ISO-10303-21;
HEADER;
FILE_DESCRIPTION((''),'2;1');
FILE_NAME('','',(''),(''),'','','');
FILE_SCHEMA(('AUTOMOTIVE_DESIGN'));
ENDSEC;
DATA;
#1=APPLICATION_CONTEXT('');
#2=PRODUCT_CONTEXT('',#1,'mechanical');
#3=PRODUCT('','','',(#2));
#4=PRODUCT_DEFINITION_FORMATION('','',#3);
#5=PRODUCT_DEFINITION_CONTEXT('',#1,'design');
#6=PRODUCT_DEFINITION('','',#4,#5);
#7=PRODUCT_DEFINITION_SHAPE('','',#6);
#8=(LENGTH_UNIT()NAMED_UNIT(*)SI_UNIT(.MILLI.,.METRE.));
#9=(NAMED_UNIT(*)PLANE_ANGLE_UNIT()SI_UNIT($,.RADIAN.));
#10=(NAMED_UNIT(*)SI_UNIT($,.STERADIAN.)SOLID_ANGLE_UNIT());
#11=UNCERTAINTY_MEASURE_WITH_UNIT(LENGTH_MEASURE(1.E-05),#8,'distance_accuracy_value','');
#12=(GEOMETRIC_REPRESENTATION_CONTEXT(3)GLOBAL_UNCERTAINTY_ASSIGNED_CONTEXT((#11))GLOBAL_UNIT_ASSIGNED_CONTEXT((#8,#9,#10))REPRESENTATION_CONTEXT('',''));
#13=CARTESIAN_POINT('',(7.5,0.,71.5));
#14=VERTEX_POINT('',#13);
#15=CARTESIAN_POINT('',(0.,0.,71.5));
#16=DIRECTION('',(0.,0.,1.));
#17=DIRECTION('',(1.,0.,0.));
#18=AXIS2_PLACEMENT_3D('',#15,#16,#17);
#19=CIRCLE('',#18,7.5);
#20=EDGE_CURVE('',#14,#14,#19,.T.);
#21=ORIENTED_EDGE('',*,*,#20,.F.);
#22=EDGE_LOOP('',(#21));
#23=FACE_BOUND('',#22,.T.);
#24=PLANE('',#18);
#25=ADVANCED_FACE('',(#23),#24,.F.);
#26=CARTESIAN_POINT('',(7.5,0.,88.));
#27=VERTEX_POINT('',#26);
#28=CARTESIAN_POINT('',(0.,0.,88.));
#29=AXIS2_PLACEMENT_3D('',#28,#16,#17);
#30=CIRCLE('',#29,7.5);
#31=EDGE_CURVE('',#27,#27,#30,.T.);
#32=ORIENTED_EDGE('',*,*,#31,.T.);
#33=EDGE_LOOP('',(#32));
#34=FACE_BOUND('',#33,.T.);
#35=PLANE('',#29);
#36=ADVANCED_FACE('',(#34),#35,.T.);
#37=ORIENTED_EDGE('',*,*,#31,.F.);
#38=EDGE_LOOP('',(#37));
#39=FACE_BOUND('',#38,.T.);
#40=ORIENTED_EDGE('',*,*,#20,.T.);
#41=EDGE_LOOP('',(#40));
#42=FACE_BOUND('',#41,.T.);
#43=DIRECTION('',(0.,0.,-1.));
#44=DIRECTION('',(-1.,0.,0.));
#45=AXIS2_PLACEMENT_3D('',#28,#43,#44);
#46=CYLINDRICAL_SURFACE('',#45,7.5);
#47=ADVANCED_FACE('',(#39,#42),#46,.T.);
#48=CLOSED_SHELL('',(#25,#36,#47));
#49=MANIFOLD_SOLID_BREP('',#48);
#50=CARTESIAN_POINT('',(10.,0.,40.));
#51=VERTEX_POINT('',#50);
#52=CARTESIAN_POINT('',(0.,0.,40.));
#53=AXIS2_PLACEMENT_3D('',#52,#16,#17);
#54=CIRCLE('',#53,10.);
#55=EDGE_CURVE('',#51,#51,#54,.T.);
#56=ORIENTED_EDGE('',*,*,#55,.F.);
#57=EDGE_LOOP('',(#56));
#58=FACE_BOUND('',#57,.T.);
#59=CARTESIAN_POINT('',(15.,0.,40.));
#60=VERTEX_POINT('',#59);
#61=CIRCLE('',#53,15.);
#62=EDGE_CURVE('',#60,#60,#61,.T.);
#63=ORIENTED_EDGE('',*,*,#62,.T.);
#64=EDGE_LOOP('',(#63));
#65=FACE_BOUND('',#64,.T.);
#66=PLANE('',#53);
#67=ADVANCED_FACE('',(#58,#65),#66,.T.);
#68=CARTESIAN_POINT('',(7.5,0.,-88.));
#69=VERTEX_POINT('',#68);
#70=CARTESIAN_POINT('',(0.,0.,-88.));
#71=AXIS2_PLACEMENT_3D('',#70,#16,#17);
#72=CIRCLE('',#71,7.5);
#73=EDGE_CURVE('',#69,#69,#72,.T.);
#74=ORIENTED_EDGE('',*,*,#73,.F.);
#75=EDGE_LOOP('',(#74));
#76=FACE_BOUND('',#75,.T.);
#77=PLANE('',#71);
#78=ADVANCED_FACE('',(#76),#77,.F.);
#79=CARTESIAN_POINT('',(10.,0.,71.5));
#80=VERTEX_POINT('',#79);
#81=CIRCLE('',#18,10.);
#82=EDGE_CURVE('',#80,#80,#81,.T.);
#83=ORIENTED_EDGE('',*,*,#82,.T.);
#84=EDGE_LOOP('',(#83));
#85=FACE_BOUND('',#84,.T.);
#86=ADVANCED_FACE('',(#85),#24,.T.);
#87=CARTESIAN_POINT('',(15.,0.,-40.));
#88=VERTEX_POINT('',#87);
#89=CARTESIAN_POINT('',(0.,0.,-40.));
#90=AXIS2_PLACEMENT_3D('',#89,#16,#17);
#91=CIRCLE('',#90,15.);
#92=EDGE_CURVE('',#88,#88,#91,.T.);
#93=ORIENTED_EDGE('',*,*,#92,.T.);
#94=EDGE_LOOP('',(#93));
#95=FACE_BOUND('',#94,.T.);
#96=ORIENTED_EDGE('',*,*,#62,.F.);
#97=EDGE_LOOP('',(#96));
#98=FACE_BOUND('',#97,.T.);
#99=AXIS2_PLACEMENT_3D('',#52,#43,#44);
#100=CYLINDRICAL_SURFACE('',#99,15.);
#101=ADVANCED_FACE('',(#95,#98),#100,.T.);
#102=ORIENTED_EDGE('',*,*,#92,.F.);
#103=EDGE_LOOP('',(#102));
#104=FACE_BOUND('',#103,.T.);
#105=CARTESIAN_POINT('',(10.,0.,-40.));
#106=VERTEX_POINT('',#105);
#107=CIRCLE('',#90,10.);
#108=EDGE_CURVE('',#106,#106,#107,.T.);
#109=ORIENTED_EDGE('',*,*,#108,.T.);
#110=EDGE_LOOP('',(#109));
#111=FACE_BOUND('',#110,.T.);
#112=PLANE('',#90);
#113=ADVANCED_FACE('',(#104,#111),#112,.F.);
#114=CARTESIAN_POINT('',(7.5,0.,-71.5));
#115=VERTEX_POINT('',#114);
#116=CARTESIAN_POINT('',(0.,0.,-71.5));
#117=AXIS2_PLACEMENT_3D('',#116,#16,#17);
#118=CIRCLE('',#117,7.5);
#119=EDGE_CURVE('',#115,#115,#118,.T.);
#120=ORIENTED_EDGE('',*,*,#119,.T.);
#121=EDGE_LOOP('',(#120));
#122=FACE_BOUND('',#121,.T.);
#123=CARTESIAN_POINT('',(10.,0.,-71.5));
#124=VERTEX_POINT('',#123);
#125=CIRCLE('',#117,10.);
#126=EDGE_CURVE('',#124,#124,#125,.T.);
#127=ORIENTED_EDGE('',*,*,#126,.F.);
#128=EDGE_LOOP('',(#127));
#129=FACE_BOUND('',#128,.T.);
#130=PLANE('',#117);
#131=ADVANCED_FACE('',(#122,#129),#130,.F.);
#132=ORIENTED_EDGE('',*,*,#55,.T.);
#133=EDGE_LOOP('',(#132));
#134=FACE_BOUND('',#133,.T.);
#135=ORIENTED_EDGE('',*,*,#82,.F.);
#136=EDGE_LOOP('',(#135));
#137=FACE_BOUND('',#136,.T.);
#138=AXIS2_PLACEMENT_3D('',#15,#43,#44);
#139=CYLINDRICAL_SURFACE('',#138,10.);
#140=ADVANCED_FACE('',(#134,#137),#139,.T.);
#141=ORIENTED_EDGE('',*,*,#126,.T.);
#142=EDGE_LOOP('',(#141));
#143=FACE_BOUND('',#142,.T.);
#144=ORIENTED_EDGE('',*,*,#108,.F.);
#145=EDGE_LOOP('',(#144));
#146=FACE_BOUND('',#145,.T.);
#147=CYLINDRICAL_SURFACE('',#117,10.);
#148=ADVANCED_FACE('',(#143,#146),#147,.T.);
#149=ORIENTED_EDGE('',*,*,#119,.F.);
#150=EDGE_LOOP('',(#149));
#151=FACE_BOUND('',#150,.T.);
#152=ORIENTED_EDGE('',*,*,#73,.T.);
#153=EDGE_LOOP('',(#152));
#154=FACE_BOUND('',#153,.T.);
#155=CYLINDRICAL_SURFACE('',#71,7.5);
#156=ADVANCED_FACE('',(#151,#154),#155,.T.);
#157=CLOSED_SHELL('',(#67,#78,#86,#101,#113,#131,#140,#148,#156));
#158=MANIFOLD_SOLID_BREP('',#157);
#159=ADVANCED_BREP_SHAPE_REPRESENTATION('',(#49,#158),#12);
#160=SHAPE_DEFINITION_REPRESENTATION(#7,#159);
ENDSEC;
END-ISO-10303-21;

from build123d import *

# Parameters (mm, degrees)
ESQUISSE1_R        = 15
BOSS_EXTRU_1_DEPTH = 40
BOSS_EXTRU_5_START = 40
ESQUISSE1_10_R     = 10
BOSS_EXTRU_5_DEPTH = 31.5
BOSS_EXTRU_3_START = 71.5
ESQUISSE1_7_R      = 7.5
BOSS_EXTRU_3_DEPTH = 16.5
BOSS_EXTRU_4_START = -71.5
ESQUISSE1_8_R      = 7.5
BOSS_EXTRU_4_DEPTH = 16.5
BOSS_EXTRU_6_START = -71.5
ESQUISSE1_11_R     = 10
BOSS_EXTRU_6_DEPTH = 31.5


with BuildPart() as part:
    # Esquisse1 → Boss.-Extru.1 (new, symmetric)
    with BuildSketch(Plane.XY):
        Circle(ESQUISSE1_R)
    extrude(amount=BOSS_EXTRU_1_DEPTH, both=True)

    # Esquisse1<10> → Boss.-Extru.5 (add)
    with BuildSketch(Plane.XY.offset(BOSS_EXTRU_5_START)):
        Circle(ESQUISSE1_10_R)
    extrude(amount=BOSS_EXTRU_5_DEPTH)



with BuildPart() as body_2:
    # Esquisse1<7> → Boss.-Extru.3 (new body)
    with BuildSketch(Plane.XY.offset(BOSS_EXTRU_3_START)):
        Circle(ESQUISSE1_7_R)
    extrude(amount=BOSS_EXTRU_3_DEPTH)


with BuildPart() as body_3:
    # Esquisse1<8> → Boss.-Extru.4 (new body)
    with BuildSketch(Plane.XY.offset(BOSS_EXTRU_4_START)):
        Circle(ESQUISSE1_8_R)
    extrude(amount=-BOSS_EXTRU_4_DEPTH)


with BuildPart() as part_1:
    add(part.part)

    add(body_3.part)  # Boss.-Extru.6 merges body 3
    # Esquisse1<11> → Boss.-Extru.6 (add)
    with BuildSketch(Plane.XY.offset(BOSS_EXTRU_6_START)):
        Circle(ESQUISSE1_11_R)
    extrude(amount=BOSS_EXTRU_6_DEPTH)


solid = Compound([body_2.part, part_1.part])
